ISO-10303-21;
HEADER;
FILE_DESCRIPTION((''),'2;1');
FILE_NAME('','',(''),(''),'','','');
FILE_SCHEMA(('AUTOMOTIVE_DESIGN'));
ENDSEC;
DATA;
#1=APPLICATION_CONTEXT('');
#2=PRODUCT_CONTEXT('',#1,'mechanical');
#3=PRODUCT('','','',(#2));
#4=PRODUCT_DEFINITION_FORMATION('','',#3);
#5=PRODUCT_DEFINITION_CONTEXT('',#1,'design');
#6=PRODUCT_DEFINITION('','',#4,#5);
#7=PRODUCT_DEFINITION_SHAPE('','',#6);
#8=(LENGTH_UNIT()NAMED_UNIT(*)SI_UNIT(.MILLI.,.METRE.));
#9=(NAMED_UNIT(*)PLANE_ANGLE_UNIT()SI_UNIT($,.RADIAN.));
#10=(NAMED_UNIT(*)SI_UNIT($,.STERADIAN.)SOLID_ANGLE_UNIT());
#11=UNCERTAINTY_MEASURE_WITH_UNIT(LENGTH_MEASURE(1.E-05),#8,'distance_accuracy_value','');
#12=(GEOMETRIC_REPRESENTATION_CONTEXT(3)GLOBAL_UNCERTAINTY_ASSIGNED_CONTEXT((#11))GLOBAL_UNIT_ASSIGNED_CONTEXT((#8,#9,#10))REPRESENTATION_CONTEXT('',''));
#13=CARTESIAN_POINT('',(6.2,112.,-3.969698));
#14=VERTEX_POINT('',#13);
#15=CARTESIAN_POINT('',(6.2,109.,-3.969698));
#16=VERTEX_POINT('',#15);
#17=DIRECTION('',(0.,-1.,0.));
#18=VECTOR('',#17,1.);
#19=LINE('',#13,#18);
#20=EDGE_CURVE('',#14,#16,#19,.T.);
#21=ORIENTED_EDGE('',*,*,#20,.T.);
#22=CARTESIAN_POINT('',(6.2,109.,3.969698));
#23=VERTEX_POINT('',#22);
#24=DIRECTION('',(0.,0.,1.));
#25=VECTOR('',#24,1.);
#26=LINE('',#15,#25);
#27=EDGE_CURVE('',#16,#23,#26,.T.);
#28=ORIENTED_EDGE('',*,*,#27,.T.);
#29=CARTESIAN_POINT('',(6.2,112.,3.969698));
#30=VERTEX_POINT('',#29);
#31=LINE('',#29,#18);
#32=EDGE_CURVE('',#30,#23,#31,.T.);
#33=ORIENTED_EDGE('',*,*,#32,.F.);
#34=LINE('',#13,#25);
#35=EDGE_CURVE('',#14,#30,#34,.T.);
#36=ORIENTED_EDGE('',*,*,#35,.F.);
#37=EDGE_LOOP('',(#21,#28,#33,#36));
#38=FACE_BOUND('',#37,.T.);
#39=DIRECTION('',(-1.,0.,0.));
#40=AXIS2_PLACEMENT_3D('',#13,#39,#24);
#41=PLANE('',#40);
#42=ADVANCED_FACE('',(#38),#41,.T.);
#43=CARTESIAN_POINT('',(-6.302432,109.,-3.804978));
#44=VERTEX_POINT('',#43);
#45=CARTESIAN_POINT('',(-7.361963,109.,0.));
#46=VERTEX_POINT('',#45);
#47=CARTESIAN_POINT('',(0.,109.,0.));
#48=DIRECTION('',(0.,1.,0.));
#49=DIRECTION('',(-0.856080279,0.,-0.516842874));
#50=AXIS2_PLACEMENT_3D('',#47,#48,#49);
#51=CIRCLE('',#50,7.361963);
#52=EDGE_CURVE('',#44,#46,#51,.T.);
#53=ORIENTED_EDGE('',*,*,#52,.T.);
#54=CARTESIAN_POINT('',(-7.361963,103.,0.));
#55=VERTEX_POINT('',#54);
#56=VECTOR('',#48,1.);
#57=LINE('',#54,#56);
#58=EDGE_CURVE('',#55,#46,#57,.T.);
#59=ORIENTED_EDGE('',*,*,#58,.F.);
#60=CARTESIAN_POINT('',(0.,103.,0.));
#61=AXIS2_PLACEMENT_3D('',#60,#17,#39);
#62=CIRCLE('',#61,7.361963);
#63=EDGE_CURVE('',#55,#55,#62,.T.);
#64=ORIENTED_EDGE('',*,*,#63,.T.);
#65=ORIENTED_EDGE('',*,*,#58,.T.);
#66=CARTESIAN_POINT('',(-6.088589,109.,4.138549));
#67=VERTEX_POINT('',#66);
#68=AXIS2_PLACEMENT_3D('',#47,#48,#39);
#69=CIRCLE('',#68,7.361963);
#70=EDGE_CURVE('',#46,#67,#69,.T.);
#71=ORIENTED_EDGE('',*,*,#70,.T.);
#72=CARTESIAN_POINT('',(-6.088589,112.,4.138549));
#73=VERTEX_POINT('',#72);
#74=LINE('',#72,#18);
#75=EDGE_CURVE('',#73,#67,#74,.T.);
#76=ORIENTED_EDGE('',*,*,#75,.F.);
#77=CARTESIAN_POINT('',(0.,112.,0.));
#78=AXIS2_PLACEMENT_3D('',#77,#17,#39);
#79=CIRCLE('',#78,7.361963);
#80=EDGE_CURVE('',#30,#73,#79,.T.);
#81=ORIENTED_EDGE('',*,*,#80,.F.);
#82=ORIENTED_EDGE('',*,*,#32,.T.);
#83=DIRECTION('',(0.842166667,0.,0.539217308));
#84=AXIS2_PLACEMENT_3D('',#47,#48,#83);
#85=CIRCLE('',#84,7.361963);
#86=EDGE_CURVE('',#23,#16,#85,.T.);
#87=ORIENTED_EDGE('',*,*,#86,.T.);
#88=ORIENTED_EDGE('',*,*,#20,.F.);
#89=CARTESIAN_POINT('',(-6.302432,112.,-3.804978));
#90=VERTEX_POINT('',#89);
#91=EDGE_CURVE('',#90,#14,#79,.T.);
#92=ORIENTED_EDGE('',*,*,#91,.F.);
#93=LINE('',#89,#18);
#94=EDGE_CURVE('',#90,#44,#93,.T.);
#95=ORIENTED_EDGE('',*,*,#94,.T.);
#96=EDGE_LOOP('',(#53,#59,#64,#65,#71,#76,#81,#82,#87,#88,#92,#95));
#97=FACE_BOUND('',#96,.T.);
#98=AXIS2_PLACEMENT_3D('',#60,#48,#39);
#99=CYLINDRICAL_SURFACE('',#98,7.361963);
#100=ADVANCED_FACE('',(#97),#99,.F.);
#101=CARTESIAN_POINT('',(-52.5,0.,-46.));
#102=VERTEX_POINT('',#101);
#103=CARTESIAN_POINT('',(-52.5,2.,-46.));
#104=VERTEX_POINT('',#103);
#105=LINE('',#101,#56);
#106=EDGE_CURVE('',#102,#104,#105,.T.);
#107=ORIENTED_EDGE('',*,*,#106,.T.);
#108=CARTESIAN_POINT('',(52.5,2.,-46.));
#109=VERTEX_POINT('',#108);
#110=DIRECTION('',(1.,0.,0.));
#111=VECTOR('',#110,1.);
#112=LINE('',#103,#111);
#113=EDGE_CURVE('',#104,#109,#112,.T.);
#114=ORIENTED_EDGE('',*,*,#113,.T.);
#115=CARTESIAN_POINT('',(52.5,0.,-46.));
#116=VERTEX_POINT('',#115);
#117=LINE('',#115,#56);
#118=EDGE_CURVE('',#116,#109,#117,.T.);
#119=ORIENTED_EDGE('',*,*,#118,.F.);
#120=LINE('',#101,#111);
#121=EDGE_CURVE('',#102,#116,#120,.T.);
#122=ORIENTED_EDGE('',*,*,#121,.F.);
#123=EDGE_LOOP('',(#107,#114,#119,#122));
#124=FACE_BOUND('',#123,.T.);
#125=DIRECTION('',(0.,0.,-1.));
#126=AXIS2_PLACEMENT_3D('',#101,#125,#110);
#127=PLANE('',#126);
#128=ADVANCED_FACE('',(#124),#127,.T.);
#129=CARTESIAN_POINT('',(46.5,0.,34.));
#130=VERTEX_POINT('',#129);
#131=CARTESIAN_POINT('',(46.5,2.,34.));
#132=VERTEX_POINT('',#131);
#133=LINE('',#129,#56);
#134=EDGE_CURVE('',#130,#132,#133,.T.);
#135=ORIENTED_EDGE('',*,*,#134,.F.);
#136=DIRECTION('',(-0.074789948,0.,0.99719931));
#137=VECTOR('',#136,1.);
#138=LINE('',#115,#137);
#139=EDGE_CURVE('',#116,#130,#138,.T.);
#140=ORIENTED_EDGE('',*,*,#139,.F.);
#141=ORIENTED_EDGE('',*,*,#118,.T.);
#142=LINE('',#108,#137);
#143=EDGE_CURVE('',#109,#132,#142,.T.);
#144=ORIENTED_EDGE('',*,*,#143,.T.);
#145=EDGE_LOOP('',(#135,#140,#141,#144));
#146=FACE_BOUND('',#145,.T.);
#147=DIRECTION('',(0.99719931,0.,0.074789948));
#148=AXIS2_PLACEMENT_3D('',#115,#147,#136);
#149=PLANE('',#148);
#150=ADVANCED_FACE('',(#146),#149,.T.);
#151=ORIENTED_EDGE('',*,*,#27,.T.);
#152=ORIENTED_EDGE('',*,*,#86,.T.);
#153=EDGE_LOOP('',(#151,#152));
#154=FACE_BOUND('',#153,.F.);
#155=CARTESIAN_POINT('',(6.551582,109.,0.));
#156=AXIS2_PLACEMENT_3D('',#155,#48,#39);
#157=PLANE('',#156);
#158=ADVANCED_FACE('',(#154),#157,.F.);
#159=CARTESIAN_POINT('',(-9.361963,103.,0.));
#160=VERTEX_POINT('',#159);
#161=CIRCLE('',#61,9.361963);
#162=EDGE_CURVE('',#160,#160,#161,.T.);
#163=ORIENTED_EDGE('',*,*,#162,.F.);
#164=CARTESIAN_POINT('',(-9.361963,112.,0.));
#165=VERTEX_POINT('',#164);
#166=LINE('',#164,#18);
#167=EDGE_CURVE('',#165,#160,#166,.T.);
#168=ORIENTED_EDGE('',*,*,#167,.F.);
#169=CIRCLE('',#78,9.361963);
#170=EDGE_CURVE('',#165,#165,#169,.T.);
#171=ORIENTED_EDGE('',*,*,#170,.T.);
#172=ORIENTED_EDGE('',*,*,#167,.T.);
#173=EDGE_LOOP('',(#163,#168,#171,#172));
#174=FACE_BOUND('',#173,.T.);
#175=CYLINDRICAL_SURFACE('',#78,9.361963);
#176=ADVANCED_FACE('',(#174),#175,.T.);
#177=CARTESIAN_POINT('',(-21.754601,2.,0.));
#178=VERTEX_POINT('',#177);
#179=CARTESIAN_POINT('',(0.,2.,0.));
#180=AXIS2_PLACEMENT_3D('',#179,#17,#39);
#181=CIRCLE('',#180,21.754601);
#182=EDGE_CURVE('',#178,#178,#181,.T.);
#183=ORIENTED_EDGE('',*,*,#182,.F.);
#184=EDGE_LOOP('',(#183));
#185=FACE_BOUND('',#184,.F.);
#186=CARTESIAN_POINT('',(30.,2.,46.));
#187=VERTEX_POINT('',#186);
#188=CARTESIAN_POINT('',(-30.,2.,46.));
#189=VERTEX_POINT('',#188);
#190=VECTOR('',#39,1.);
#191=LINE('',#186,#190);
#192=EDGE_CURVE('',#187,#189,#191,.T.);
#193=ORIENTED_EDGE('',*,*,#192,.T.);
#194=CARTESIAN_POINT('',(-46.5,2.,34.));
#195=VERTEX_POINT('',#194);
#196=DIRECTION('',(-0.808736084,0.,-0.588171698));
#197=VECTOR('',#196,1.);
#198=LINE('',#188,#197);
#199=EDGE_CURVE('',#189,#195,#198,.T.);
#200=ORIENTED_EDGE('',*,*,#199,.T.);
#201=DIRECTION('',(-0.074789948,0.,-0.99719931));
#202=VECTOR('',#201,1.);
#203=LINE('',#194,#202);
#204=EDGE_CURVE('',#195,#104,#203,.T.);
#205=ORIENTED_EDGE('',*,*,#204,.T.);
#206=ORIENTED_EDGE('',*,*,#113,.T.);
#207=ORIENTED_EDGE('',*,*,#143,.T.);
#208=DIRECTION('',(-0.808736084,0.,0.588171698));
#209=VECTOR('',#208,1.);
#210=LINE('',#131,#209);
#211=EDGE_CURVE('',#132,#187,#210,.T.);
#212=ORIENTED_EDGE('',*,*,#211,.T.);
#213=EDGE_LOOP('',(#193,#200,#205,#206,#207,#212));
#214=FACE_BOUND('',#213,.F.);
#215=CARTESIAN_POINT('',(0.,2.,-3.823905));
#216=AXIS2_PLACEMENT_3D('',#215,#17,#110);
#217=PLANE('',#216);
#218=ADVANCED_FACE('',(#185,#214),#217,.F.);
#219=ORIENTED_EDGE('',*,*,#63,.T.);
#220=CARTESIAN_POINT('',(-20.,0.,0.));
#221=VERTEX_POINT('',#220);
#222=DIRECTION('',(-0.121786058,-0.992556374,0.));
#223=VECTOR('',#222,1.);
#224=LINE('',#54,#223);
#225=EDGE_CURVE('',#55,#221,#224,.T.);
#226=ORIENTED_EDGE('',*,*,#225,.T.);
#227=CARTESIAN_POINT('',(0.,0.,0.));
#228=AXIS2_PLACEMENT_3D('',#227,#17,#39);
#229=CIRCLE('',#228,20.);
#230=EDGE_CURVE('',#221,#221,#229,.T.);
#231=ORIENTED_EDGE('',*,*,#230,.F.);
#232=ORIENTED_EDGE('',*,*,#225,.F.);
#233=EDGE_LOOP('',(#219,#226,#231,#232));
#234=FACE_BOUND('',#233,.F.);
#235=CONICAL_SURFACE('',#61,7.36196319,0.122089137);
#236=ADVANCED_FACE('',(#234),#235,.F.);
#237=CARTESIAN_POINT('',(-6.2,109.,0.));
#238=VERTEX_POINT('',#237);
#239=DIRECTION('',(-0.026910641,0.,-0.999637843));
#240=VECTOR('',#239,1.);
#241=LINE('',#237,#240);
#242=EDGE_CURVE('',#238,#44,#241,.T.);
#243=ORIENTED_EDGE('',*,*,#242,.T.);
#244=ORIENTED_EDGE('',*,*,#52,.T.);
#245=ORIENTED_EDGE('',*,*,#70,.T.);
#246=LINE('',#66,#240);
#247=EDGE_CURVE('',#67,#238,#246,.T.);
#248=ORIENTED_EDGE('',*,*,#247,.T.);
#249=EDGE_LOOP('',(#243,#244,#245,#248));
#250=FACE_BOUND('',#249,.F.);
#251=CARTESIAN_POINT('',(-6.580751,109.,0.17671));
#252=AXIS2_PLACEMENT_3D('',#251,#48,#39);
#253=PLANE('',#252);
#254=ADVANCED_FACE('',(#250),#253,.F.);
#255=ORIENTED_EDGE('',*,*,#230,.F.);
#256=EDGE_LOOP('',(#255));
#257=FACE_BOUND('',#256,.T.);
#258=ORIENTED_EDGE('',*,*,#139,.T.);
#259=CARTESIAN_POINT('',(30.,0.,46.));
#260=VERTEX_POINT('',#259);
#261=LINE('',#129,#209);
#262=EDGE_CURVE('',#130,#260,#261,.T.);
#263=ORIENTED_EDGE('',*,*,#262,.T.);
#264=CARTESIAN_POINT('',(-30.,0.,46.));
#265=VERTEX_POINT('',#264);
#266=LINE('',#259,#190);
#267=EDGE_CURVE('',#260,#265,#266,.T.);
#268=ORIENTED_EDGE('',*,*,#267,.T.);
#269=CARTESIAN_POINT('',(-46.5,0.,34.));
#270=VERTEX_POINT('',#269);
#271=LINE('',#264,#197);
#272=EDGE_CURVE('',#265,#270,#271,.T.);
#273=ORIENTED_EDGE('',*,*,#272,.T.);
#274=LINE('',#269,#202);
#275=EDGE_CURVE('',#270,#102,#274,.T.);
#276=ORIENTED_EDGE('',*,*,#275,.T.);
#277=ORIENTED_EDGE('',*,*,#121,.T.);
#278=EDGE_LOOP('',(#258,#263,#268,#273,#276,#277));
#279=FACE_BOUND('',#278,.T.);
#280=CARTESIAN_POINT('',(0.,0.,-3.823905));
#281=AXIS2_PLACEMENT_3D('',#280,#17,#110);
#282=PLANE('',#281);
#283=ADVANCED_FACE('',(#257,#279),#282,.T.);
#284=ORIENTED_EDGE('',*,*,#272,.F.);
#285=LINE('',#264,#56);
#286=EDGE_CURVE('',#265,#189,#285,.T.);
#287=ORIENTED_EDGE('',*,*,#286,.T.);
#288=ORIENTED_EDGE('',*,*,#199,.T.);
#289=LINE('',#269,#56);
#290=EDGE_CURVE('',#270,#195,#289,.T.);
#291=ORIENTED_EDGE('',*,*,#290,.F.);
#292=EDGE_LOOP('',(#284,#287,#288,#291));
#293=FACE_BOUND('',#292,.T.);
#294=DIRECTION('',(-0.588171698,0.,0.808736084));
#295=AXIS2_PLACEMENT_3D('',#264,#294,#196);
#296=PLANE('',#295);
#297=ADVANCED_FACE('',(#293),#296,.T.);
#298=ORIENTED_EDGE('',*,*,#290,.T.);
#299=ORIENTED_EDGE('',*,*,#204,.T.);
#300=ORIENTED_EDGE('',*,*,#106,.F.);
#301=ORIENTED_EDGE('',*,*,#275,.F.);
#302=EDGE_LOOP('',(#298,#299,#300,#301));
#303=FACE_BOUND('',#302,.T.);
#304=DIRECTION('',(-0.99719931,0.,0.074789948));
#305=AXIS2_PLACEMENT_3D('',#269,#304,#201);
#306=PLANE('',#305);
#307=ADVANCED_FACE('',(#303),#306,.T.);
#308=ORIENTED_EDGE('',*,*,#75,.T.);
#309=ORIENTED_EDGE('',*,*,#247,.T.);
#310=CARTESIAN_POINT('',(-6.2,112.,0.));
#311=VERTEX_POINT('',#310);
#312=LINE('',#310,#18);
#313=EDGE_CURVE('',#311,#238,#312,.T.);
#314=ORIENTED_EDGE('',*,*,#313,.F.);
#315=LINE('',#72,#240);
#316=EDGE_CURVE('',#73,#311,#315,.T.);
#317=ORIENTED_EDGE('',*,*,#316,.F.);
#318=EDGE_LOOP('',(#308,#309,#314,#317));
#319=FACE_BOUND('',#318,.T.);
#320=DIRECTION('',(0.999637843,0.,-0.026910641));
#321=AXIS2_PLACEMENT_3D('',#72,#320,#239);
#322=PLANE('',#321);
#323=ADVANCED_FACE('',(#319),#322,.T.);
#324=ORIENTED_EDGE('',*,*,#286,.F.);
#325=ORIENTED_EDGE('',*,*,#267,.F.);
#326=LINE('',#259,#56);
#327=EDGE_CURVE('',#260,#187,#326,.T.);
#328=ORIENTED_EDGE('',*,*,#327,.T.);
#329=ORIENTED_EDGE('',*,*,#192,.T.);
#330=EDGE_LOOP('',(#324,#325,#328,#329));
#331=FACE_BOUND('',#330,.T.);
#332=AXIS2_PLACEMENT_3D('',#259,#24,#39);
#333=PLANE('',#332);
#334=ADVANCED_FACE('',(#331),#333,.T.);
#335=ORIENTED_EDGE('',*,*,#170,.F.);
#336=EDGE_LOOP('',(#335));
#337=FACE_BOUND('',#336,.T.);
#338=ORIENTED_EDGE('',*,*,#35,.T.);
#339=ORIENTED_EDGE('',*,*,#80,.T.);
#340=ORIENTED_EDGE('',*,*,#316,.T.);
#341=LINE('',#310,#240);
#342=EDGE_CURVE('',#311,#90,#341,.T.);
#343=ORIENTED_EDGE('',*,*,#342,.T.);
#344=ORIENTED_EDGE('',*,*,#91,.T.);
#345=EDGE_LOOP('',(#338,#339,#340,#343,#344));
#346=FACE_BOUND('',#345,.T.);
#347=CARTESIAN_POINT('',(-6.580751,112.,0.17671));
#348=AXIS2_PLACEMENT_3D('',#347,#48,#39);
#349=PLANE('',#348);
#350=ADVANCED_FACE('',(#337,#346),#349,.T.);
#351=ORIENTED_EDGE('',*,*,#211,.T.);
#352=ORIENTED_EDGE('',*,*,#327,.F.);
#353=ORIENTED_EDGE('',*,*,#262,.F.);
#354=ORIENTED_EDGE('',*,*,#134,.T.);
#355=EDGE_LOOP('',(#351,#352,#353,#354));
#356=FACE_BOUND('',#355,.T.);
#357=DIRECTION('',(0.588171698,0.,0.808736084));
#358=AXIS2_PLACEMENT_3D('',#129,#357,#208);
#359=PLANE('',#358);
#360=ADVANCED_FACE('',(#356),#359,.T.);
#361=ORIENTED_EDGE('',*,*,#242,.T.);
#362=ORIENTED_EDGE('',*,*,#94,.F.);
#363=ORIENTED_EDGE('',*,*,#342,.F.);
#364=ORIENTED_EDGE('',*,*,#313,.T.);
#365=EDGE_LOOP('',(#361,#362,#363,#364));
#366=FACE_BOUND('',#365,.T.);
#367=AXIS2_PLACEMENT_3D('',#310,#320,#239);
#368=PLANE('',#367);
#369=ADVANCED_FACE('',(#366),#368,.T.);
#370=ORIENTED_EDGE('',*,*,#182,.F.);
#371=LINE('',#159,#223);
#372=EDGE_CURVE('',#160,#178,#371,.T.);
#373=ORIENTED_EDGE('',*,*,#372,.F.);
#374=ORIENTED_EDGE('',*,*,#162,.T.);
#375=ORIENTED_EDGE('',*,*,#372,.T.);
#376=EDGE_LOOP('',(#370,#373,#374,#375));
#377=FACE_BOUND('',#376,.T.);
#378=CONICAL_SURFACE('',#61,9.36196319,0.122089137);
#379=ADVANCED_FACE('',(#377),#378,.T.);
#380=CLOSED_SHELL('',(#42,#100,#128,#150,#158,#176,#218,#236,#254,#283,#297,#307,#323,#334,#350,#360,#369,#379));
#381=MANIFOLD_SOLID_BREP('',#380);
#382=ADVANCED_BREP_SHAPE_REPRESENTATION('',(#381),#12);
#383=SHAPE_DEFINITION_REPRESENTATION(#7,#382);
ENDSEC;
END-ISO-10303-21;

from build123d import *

# Parameters (mm, degrees)
F1_DEPTH = 2
F6_DEPTH = 3


with BuildPart() as f1:
    # F0 (on Front) → F1 (new body)
    with BuildSketch(Plane.XZ):
        Polygon((-52.5, -46), (52.5, -46), (46.5, 34), (30, 46), (-30, 46), (-46.5, 34), align=None)
    extrude(amount=-F1_DEPTH)

    # F2 (on Top) → F3 (revolve, cut)
    with BuildSketch(Plane.XY):
        Polygon((-20, 0), (0, 0), (0, 103), (-7.3619631902, 103), align=None)
    revolve(axis=Axis((0, 81.5, 0), (0, -1, 0)), mode=Mode.SUBTRACT)

    # F2 (on Top) → F4 (revolve)
    with BuildSketch(Plane.XY):
        Polygon((-22, 0), (-20, 0), (-7.3619631902, 103), (-9.3619631902, 103), align=None)
        Polygon((-9.3619631902, 103), (-7.3619631902, 103), (-7.3619631902, 112), (-8.2576687117, 112), align=None)
        Polygon((-9.3619631902, 112), (-9.3619631902, 103), (-8.2576687117, 112), align=None)
    revolve(axis=Axis((0, 2, 0), (0, -1, 0)))

    # F5 (on face) → F6 (join)
    with BuildSketch(Plane(origin=(0, 112, 0), x_dir=(-1, 0, 0), z_dir=(0, 1, 0))):
        with BuildLine():
            Line((-6.2, -3.9696979751), (-6.2, 0))
            Line((-6.2, 0), (-6.2, 3.9696979751))
            ThreePointArc((-6.2, 3.9696979751), (-7.3619631902, 0), (-6.2, -3.9696979751))
        make_face()
        with BuildLine():
            Line((6.0885886352, 4.1385493165), (6.2, 0))
            Line((6.2, 0), (6.3024315003, -3.8049782124))
            ThreePointArc((6.3024315003, -3.8049782124), (7.0921354587, -1.9748712995), (7.3619631902, 0))
            ThreePointArc((7.3619631902, 0), (7.0364219397, 2.1650100001), (6.0885886352, 4.1385493165))
        make_face()
    extrude(amount=-F6_DEPTH)


solid = f1.part
